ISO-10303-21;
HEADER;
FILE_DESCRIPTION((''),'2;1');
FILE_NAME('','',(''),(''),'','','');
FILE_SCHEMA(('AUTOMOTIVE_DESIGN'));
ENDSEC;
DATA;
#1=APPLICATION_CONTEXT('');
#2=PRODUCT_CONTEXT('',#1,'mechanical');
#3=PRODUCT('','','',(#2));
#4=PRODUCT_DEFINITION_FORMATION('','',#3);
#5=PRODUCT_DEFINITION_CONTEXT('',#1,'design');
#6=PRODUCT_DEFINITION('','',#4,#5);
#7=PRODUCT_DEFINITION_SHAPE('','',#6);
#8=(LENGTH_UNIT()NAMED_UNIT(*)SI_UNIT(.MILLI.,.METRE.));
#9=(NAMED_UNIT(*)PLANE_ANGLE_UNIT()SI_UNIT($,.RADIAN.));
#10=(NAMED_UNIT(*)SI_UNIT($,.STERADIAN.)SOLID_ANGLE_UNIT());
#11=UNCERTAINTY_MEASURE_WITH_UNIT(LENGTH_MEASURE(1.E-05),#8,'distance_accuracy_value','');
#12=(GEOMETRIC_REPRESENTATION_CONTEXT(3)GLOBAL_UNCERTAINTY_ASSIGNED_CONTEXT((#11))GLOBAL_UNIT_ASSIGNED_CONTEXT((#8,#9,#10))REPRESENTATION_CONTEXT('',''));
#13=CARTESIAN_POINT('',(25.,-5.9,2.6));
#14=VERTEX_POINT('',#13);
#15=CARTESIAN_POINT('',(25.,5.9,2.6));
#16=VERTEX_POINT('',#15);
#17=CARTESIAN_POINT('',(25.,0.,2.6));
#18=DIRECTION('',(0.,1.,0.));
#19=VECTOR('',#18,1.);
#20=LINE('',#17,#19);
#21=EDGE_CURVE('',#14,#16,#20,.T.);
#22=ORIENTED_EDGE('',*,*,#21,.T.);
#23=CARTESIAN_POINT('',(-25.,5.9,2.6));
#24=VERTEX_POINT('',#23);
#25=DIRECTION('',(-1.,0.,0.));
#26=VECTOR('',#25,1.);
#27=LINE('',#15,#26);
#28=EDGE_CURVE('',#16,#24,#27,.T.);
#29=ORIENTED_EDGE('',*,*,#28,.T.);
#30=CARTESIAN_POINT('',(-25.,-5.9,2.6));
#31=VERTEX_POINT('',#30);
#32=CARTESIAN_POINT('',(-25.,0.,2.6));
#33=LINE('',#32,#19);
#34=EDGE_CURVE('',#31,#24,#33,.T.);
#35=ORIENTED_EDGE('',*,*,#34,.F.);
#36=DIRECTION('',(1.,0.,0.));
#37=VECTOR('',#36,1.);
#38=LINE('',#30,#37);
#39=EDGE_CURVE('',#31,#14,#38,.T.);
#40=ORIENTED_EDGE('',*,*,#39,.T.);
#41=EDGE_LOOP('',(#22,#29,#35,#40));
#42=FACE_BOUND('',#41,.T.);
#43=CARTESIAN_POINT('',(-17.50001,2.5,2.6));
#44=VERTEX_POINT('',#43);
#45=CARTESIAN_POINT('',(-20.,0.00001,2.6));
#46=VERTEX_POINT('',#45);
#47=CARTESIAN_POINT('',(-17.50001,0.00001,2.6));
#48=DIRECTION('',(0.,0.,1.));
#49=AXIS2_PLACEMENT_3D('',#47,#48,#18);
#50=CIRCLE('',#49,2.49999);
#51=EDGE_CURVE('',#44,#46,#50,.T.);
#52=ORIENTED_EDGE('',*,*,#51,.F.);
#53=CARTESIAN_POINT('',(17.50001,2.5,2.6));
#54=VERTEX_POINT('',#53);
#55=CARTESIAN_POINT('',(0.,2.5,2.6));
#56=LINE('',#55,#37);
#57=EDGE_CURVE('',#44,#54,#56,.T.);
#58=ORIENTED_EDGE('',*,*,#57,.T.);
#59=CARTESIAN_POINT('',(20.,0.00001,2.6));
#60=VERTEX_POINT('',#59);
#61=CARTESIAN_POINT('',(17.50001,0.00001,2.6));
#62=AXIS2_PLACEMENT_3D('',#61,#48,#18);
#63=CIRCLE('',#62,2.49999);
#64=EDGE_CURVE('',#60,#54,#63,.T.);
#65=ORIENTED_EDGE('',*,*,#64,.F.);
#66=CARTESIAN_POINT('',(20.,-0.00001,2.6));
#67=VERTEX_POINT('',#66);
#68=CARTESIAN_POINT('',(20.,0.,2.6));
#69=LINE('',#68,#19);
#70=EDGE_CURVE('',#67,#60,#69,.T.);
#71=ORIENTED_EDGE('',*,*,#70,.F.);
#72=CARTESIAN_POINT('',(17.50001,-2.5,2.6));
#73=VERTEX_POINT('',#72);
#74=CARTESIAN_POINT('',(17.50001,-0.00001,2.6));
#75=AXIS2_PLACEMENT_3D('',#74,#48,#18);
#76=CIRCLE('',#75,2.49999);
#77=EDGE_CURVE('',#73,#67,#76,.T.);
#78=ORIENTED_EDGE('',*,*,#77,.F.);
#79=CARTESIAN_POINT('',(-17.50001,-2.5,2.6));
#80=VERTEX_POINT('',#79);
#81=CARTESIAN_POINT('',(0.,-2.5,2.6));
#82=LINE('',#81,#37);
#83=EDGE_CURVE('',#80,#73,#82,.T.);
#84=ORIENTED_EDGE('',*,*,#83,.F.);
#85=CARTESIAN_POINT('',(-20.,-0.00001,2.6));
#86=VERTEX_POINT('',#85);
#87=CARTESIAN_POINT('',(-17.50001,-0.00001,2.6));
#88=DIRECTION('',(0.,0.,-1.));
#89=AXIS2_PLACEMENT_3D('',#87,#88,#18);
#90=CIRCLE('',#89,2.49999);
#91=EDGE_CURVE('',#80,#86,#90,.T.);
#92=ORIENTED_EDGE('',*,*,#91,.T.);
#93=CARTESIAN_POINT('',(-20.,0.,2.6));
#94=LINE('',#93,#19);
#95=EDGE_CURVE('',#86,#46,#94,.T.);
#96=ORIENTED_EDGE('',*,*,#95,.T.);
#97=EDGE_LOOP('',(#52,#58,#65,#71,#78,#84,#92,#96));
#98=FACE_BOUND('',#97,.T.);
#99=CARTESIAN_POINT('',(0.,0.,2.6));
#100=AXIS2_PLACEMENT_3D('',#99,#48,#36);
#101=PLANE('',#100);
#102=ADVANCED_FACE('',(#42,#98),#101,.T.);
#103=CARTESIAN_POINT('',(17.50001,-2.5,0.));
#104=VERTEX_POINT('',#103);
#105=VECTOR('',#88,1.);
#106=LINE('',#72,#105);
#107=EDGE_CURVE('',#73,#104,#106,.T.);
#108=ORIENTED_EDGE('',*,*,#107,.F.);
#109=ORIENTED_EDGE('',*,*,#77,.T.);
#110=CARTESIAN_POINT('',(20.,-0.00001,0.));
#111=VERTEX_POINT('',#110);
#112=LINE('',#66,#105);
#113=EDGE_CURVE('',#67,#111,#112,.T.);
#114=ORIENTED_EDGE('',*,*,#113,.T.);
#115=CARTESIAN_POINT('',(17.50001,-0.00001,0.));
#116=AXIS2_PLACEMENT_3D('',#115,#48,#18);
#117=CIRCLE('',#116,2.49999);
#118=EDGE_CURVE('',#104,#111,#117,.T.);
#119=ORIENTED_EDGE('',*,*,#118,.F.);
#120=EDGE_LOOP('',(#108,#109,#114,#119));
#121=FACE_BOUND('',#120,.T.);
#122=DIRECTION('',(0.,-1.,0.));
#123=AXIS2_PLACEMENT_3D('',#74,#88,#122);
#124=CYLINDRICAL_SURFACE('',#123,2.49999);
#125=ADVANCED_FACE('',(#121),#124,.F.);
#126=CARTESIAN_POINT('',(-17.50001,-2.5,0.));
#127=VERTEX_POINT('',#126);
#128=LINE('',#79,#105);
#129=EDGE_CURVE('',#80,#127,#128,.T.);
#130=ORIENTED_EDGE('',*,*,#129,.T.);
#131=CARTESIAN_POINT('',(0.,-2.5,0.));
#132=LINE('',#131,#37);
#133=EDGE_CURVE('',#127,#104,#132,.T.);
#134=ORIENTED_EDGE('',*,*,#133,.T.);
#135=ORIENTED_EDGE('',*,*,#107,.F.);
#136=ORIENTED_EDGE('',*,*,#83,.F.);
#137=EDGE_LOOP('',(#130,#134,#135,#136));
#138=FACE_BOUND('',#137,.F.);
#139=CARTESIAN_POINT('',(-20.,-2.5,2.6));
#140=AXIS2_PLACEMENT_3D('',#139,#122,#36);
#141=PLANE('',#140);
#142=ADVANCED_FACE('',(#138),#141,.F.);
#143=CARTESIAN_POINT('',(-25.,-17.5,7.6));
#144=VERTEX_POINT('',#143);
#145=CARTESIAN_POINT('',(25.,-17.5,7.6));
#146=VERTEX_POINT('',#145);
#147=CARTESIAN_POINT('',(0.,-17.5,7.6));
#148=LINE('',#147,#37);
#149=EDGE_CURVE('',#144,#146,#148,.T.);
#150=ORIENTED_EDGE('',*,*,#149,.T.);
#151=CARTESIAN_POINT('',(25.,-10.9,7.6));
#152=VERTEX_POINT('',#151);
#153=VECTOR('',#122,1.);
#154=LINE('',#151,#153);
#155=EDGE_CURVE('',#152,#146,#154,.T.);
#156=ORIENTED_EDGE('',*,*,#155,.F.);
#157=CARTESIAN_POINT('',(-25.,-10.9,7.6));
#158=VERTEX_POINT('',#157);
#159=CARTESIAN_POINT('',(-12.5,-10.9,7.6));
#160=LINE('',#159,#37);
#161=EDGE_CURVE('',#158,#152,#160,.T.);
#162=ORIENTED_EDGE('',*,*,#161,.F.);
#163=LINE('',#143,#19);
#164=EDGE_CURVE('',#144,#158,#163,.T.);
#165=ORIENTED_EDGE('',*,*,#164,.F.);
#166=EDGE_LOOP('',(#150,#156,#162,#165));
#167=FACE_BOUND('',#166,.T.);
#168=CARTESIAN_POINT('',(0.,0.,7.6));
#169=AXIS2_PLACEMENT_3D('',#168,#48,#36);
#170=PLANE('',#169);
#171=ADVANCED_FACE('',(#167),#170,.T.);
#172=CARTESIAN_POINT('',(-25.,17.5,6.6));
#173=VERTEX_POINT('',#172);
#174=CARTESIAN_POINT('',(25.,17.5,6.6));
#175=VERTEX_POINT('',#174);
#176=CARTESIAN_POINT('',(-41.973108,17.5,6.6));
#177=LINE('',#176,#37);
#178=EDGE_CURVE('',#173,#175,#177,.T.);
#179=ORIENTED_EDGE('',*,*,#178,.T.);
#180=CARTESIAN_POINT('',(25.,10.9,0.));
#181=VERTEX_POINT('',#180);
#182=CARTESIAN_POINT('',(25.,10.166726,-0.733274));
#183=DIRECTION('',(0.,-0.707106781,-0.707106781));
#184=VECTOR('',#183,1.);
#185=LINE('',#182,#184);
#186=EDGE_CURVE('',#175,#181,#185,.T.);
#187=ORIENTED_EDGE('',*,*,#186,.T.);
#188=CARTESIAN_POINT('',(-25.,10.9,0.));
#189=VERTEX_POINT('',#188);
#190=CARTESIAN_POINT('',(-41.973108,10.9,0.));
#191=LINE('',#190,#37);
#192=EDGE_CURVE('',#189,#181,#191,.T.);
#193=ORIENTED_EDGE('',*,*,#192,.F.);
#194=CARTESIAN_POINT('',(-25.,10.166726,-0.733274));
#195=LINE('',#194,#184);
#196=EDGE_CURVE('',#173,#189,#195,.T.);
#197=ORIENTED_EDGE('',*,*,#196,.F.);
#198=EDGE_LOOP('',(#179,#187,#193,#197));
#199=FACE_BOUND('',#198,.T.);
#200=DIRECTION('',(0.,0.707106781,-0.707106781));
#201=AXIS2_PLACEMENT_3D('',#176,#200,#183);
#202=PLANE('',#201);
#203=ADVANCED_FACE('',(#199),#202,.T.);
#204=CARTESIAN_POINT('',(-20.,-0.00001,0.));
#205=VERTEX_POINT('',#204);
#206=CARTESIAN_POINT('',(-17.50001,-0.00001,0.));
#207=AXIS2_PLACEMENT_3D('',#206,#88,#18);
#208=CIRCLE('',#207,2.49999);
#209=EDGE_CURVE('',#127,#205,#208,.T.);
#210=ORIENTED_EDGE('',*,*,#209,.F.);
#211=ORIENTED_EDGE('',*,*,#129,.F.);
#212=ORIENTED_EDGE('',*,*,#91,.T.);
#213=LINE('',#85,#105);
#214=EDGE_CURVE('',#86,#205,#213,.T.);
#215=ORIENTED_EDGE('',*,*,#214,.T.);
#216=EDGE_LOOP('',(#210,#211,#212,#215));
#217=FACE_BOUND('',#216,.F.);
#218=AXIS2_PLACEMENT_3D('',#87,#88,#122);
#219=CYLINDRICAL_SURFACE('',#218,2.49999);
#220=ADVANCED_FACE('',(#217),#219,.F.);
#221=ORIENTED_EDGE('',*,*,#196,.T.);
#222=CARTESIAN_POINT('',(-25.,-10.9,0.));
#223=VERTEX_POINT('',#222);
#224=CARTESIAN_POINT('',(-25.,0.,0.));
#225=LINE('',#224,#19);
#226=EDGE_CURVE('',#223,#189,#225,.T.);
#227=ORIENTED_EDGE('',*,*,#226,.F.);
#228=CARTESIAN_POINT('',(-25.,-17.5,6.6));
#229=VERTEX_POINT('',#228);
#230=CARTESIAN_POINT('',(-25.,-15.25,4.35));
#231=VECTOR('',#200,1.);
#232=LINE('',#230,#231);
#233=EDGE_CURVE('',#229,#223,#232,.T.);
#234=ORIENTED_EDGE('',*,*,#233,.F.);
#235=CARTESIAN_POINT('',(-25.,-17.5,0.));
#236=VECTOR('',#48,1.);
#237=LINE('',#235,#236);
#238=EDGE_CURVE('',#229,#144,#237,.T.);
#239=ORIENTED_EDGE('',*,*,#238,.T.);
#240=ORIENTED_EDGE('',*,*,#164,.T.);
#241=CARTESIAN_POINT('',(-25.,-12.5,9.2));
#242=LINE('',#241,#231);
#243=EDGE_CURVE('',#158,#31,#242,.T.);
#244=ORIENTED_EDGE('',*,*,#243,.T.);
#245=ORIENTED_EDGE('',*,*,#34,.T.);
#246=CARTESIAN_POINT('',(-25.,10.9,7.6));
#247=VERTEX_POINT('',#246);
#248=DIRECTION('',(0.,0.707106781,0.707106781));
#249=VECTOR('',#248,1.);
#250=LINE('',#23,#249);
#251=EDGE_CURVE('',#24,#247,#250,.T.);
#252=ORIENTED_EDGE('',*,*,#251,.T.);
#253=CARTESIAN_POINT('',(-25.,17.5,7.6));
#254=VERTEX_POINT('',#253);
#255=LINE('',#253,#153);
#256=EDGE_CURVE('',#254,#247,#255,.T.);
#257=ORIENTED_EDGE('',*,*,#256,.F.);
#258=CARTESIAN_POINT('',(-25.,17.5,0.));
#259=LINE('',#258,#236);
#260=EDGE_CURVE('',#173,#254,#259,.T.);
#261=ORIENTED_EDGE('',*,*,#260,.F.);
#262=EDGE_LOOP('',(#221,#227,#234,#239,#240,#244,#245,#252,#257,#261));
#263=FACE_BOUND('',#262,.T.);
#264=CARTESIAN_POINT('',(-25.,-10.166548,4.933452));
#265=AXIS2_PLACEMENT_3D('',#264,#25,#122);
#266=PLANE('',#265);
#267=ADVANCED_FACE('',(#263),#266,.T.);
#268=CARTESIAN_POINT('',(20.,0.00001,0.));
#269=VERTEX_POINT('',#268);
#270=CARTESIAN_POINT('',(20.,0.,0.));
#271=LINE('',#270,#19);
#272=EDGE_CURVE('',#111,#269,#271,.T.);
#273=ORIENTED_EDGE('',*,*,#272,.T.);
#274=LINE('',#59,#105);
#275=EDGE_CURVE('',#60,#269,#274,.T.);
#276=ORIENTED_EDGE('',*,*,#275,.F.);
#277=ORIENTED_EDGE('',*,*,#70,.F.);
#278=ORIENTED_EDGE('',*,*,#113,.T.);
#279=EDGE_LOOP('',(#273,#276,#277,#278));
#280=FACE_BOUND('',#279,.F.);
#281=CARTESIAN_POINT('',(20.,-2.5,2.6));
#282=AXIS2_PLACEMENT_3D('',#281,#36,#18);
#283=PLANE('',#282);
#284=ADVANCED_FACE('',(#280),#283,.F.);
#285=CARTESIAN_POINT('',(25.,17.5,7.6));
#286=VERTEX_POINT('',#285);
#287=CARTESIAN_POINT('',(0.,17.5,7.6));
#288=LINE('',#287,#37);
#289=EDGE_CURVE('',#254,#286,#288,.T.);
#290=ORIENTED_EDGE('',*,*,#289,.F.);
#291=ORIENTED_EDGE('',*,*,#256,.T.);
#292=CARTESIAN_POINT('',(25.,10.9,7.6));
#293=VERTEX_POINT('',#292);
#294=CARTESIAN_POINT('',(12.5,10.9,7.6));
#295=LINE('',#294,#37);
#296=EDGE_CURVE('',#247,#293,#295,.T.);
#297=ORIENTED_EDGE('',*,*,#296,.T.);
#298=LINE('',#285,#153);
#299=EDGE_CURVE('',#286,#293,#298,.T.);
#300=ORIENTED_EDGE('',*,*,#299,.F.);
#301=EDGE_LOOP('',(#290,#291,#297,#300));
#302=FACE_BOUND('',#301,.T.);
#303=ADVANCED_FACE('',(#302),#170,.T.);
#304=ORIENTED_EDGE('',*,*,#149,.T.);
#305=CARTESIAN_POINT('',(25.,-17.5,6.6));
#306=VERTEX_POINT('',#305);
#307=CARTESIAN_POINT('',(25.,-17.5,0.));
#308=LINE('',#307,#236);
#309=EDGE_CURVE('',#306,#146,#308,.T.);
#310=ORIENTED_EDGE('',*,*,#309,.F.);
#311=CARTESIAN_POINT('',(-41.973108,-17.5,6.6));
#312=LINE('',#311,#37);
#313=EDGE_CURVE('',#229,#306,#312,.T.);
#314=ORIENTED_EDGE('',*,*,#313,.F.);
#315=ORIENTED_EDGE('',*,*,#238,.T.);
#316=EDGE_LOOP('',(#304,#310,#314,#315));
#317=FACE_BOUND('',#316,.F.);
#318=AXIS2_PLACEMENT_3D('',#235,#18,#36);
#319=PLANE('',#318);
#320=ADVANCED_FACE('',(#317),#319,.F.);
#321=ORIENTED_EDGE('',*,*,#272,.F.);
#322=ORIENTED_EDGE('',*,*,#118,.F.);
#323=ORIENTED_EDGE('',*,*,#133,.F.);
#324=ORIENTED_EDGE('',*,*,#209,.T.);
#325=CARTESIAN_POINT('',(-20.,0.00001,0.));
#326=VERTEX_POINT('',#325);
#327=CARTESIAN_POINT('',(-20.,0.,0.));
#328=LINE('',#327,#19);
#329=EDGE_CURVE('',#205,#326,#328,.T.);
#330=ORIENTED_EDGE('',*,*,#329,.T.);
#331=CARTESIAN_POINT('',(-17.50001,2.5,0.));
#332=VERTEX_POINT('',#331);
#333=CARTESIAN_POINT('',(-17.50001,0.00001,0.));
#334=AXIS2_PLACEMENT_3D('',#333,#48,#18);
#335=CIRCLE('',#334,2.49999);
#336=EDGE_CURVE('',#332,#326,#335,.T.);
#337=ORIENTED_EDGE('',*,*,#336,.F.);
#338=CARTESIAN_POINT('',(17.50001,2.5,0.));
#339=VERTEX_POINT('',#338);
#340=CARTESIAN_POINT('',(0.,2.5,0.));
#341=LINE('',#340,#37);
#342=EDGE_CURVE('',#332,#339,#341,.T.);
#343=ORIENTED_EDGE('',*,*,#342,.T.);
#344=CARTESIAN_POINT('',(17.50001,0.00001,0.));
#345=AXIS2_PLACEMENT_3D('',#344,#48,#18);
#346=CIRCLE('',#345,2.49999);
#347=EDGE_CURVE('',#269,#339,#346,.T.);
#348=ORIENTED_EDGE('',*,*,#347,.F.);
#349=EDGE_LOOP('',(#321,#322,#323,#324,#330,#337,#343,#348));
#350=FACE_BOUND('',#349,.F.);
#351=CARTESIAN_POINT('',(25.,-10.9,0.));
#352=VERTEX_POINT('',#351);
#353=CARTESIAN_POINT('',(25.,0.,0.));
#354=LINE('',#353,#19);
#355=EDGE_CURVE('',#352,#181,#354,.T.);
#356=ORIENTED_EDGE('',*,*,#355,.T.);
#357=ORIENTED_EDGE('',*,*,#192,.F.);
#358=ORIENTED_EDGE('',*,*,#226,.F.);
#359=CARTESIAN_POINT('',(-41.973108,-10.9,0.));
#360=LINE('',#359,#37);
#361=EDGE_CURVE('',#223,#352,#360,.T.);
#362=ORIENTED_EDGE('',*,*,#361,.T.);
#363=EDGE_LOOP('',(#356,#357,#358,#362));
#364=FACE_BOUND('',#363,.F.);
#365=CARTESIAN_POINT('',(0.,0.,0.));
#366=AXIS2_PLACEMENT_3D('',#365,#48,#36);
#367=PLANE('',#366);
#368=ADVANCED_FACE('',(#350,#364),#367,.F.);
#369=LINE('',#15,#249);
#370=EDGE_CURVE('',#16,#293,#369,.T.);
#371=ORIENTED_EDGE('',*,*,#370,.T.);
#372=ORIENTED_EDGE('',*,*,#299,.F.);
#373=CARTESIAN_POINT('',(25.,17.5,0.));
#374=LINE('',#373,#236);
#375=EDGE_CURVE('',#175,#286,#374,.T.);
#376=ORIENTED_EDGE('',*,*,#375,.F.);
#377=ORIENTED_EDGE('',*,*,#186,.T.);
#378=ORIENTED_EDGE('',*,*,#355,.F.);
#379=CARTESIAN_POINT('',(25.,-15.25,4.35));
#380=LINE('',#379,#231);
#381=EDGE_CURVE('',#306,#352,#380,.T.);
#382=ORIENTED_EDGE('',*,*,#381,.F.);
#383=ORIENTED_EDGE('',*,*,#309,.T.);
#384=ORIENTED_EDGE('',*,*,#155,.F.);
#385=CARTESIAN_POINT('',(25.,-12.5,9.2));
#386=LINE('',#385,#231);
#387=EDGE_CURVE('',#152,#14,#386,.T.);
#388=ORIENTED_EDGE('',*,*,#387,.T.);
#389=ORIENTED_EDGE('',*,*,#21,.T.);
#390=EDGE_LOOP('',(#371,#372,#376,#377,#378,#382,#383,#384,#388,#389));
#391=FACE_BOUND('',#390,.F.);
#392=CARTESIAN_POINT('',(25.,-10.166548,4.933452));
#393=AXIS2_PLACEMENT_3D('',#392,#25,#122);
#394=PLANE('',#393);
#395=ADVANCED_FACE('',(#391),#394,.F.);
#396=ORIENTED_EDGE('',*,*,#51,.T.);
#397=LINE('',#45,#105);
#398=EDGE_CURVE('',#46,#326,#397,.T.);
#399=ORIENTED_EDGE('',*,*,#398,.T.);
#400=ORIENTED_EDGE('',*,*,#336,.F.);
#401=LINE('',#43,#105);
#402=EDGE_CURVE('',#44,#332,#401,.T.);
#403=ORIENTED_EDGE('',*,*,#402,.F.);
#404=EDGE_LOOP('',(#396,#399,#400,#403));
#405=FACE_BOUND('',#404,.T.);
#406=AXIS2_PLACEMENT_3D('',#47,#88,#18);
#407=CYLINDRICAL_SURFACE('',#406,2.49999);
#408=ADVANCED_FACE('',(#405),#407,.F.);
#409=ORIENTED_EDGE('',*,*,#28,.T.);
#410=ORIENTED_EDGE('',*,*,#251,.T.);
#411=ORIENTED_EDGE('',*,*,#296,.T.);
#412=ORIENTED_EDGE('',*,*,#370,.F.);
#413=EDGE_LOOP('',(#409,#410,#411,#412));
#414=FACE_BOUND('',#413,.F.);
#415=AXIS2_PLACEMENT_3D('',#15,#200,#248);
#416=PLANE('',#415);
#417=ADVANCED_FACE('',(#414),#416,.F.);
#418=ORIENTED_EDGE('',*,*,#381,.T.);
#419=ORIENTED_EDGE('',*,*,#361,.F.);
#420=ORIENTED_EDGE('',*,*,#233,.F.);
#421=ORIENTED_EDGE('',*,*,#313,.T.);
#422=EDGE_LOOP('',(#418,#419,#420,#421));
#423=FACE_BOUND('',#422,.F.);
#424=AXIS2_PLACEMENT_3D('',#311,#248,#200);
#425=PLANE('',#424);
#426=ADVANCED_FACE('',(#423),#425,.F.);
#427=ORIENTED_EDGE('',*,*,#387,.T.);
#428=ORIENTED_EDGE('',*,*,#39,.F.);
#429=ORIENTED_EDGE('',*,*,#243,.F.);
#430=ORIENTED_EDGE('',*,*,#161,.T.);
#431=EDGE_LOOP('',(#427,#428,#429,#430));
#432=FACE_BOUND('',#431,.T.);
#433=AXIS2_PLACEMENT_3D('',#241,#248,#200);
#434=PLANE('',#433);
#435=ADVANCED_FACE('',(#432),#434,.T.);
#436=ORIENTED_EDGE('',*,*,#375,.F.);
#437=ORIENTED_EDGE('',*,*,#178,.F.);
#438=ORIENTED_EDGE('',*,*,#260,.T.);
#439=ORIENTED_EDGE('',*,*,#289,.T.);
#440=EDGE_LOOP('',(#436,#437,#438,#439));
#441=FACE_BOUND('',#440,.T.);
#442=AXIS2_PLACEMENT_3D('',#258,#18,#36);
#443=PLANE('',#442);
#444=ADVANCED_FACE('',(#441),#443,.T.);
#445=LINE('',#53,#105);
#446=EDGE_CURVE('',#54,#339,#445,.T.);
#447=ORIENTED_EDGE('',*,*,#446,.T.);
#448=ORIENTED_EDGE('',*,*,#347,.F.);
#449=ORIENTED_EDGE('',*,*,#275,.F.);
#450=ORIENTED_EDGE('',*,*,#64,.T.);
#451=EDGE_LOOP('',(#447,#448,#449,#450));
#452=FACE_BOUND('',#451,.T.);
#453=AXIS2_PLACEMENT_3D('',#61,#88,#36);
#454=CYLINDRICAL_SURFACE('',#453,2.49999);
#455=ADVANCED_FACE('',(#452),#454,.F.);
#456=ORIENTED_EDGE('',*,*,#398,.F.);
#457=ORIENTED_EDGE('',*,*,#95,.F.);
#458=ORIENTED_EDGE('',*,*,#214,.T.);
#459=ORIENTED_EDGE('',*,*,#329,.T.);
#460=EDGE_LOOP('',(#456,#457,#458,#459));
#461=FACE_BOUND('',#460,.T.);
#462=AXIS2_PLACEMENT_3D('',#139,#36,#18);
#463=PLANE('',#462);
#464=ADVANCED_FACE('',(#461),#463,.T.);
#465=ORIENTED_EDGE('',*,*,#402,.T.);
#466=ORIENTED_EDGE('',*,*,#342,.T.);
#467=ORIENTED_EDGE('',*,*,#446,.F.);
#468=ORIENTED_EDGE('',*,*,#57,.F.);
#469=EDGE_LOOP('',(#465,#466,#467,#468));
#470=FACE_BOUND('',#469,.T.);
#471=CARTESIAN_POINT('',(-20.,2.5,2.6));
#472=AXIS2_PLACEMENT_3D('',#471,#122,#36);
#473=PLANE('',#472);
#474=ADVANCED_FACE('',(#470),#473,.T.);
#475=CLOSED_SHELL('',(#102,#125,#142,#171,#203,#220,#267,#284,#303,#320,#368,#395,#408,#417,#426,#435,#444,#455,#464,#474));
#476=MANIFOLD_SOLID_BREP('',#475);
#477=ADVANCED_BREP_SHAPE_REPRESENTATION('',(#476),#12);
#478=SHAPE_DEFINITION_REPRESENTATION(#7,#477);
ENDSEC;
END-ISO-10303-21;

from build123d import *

# Parameters (mm, degrees)
F0_W         = 50
F0_H         = 35
F1_DEPTH     = 7.6
F2_W         = 50
F2_H         = 25
F3_DEPTH     = 5
F4_T4_DEPTH  = 50
F4_T9_DEPTH  = 50
F4_T11_DEPTH = 83.9462154412
F5_W         = 40
F5_H         = 5
F6_DEPTH     = 2.6
F7_R         = 2.49999


# Not quite as in the source:
# - a fillet or chamfer that OpenCascade refuses, or shapes differently, is made with other operations: its cross-section is extruded or revolved along the edge and cut away or added
# - a fillet or chamfer is up to 0.001 mm smaller than in the source, because OpenCascade refuses the exact size


with BuildPart() as f1:
    # F0 (on Top) → F1 (new body)
    with BuildSketch(Plane.XY):
        Rectangle(F0_W, F0_H)
    extrude(amount=F1_DEPTH)

    # F2 (on face) → F3 (cut)
    with BuildSketch(Plane.XY.offset(7.6)):
        Rectangle(F2_W, F2_H)
    extrude(amount=-F3_DEPTH, mode=Mode.SUBTRACT)

    # F4: chamfer of 6.6 on 4 edges, made by hand


with BuildPart() as f4_tool2:
    # F4_s3 → F4_t4 (new body)
    with BuildSketch(Plane.YZ.offset(25)):
        Polygon((5.9, 2.6), (12.5, 9.2), (12.5, 2.6), align=None)
    extrude(amount=-F4_T4_DEPTH)

    split(bisect_by=Plane.XY.offset(7.6), keep=Keep.BOTTOM)


with BuildPart() as f1_1:
    add(f1.part)

    # F4_t1: union F4_tool2
    add(f4_tool2.part)


with BuildPart() as f4_tool7:
    # F4_s8 → F4_t9 (new body)
    with BuildSketch(Plane.YZ.offset(-25)):
        Polygon((-12.5, 9.2), (-5.9, 2.6), (-12.5, 2.6), align=None)
    extrude(amount=F4_T9_DEPTH)

    split(bisect_by=Plane.XY.offset(7.6), keep=Keep.BOTTOM)


with BuildPart() as f1_2:
    add(f1_1.part)

    # F4_t6: union F4_tool7
    add(f4_tool7.part)

    # F4_s12 → F4_t11 (cut)
    with BuildSketch(Plane.YZ.offset(-41.9731077206)):
        Polygon((17.5, 6.6), (10.9, 0), (17.5, 0), align=None)
        Polygon((-17.5, 6.6), (-10.9, 0), (-17.5, 0), align=None)
    extrude(amount=F4_T11_DEPTH, mode=Mode.SUBTRACT)

    # F5 (on face) → F6 (cut, through all)
    with BuildSketch(Plane.XY.offset(2.6)):
        Rectangle(F5_W, F5_H)
    extrude(amount=-F6_DEPTH, mode=Mode.SUBTRACT)

    # F7 (radius 2.5 in the source; OpenCascade refuses exactly that, so slightly less here)
    f7_edges = [f1_2.edges().sort_by_distance(p)[0] for p in [
        (-20, -2.5, 1.3),
        (-20, 2.5, 1.3),
        (20, 2.5, 1.3),
        (20, -2.5, 1.3),
    ]]
    fillet(f7_edges, radius=F7_R)


solid = f1_2.part
